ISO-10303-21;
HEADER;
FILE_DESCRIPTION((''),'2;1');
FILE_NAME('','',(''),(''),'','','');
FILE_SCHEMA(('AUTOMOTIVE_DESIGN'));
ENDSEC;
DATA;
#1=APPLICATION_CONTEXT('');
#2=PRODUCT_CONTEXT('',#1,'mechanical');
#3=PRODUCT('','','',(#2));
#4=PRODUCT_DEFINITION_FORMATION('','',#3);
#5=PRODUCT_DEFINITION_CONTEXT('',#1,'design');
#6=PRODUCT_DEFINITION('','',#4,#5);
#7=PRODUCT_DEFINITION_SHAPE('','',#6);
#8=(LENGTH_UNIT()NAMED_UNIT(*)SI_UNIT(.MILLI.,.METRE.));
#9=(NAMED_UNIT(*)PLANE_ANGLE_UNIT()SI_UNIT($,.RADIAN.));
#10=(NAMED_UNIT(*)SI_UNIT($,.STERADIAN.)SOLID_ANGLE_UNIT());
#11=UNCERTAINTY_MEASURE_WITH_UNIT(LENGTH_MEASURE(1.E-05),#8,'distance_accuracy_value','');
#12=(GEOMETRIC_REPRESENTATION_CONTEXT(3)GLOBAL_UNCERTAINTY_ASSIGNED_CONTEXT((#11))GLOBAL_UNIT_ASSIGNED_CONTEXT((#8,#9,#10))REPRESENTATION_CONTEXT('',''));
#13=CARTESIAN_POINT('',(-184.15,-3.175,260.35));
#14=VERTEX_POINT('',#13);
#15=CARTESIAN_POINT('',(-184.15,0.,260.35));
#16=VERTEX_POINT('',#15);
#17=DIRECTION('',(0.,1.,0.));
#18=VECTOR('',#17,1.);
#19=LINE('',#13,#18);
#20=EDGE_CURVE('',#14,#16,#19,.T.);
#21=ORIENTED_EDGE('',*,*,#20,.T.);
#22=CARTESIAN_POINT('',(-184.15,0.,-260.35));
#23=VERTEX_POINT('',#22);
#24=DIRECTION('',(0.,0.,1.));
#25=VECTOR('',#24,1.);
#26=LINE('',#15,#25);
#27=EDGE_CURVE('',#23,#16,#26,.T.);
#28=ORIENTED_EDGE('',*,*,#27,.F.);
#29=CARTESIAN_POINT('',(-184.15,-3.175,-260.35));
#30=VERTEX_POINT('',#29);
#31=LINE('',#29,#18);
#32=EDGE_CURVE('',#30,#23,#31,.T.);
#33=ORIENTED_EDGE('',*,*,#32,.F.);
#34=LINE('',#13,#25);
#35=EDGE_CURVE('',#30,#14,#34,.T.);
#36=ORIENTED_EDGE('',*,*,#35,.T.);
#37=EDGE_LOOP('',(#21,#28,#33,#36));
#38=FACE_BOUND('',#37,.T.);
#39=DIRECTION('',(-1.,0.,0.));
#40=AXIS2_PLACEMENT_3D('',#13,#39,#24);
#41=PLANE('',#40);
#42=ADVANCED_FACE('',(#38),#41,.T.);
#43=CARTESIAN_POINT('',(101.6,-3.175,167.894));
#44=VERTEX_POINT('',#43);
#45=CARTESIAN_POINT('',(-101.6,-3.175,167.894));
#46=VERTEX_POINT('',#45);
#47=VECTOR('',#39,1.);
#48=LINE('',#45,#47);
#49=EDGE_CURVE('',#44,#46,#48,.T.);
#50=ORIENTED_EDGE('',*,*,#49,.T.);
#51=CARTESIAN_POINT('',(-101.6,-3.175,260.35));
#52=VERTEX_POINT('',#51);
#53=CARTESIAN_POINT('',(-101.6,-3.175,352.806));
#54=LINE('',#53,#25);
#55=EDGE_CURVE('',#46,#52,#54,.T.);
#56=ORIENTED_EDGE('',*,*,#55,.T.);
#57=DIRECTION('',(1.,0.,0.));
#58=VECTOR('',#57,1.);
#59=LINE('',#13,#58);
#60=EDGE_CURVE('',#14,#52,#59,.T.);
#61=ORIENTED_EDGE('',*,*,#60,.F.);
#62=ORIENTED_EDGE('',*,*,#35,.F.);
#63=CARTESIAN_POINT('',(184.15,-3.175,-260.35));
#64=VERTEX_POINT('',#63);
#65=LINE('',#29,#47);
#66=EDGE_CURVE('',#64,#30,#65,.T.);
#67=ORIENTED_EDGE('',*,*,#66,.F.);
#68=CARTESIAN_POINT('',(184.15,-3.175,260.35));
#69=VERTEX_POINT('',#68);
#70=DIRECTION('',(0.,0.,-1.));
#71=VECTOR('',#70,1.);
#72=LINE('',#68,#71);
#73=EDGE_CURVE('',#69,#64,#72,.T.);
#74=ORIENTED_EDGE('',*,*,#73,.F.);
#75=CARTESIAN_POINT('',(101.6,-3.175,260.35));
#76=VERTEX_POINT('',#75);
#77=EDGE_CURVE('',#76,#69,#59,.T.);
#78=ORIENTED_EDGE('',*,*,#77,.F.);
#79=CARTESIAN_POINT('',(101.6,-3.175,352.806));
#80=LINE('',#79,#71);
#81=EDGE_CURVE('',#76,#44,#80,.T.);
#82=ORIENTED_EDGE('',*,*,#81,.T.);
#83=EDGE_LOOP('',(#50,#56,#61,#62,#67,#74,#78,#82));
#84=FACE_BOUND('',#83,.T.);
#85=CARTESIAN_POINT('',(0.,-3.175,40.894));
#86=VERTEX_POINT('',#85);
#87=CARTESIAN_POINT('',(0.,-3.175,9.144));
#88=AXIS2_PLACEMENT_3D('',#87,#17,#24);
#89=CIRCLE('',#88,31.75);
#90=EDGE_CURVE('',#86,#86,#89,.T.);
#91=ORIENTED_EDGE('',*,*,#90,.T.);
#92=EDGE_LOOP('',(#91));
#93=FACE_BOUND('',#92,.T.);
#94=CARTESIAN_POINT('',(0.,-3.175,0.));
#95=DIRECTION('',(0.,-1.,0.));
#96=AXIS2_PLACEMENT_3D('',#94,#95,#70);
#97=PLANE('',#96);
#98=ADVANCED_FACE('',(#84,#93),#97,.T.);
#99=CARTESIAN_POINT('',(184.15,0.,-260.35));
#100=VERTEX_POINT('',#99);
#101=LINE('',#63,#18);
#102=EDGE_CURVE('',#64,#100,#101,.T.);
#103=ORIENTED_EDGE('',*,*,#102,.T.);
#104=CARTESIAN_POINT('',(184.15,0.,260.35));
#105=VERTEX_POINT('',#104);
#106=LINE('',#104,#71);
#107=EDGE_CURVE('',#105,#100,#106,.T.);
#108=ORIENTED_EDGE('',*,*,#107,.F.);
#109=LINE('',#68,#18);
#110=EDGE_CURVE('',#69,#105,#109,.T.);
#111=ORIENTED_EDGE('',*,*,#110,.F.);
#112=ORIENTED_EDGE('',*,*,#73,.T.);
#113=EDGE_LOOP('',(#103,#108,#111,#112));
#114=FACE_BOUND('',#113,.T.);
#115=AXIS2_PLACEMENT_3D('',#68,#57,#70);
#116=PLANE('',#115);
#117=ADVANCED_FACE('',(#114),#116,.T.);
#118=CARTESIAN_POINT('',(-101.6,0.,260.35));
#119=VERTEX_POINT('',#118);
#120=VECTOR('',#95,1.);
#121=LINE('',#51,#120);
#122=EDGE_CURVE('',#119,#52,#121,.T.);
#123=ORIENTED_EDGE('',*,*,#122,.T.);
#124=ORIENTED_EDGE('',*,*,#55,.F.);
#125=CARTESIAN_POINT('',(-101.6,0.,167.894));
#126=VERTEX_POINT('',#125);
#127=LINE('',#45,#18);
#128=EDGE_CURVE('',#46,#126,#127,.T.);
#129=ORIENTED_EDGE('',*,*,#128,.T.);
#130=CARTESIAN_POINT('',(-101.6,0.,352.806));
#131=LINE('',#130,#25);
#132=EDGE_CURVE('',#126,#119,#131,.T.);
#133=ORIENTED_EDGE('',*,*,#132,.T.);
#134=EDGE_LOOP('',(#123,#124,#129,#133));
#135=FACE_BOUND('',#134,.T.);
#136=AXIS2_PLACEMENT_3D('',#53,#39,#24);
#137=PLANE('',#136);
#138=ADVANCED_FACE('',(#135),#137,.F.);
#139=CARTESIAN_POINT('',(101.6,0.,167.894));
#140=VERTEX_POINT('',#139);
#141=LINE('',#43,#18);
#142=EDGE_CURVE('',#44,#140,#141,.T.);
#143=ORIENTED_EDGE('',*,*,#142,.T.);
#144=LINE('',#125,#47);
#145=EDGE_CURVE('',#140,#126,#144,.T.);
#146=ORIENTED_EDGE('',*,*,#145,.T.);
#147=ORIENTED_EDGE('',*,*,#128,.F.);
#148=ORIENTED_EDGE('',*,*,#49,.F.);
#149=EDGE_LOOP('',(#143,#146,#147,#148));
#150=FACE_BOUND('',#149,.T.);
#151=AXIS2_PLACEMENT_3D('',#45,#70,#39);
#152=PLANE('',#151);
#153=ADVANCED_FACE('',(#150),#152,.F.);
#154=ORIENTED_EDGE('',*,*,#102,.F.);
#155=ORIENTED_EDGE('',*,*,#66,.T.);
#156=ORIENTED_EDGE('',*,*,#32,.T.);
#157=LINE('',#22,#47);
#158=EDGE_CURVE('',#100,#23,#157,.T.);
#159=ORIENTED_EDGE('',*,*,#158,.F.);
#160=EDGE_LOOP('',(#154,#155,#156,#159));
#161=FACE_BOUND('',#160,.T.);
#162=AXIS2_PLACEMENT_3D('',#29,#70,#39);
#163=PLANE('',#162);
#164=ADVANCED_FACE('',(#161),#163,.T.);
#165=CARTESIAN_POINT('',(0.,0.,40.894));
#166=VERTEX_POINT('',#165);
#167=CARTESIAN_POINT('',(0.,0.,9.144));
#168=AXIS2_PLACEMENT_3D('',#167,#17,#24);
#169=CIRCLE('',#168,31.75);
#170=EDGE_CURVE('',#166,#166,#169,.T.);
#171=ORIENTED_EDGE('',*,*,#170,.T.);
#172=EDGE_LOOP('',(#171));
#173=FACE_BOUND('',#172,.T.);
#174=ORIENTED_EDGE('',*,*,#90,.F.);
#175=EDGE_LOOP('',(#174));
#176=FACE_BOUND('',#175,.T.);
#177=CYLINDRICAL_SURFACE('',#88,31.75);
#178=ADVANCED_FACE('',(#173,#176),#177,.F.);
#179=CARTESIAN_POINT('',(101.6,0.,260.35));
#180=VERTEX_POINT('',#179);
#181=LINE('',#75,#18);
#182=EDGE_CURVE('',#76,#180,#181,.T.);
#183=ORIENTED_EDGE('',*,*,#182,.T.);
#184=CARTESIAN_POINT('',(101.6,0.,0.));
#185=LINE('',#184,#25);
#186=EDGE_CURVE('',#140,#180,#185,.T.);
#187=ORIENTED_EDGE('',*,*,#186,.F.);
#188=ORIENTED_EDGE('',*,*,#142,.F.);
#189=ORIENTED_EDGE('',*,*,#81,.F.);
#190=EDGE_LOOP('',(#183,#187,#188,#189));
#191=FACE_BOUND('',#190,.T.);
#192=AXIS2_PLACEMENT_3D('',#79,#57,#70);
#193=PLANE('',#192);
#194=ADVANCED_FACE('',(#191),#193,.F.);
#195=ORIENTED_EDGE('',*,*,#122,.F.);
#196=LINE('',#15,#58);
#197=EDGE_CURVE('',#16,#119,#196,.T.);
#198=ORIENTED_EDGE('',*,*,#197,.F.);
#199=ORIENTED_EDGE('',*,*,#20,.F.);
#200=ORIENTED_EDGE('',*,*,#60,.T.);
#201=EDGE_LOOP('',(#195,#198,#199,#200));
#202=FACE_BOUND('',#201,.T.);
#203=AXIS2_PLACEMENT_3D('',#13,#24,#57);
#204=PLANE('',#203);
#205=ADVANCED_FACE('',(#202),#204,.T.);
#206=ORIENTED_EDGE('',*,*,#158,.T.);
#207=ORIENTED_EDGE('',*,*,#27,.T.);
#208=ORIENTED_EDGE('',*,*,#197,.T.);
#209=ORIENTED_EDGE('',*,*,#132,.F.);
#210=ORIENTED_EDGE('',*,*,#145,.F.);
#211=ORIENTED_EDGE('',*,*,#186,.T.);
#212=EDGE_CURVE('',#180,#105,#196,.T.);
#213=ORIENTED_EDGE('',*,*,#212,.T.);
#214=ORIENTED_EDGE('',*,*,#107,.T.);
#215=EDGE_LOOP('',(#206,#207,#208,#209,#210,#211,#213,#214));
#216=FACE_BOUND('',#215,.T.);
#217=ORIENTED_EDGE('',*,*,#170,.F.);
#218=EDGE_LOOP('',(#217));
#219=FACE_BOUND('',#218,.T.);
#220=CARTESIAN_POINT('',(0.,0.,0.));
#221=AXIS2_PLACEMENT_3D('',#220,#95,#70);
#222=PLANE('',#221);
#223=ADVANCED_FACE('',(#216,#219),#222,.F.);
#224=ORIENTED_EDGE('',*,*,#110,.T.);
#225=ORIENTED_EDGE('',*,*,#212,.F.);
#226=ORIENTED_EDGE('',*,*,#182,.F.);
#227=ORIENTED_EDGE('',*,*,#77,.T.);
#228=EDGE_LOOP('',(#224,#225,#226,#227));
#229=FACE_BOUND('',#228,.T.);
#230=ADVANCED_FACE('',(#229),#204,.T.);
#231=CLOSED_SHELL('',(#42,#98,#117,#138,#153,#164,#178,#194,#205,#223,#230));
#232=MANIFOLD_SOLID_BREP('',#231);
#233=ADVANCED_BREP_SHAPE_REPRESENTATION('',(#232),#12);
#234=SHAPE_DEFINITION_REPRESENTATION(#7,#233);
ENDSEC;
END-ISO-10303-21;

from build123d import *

# Parameters (mm, degrees)
SKETCH1_W          = 368.3
SKETCH1_H          = 520.7
BASE_FLANGE1_DEPTH = 3.175
SKETCH6_W          = 203.2
SKETCH6_H          = 184.912
CUT_EXTRUDE1_DEPTH = 319.909745265
SKETCH7_R          = 31.75
CUT_EXTRUDE2_DEPTH = 319.909745265


# Sheet-metal steps are written as plain solids
with BuildPart() as part:
    # Sketch1 → Base-Flange1 (new body)
    with BuildSketch(Plane(origin=(0, 0, 0), x_dir=(1, 0, 0), z_dir=(0, 1, 0))):
        Rectangle(SKETCH1_W, SKETCH1_H)
    extrude(amount=-BASE_FLANGE1_DEPTH)

    # Sketch6 → Cut-Extrude1 (cut, through all)
    with BuildSketch(Plane(origin=(0, 0, 0), x_dir=(1, 0, 0), z_dir=(0, 1, 0))):
        with Locations((0, -260.35)):
            Rectangle(SKETCH6_W, SKETCH6_H)
    extrude(amount=-CUT_EXTRUDE1_DEPTH, mode=Mode.SUBTRACT)

    # Sketch7 → Cut-Extrude2 (cut, through all)
    with BuildSketch(Plane(origin=(0, 0, 0), x_dir=(1, 0, 0), z_dir=(0, 1, 0))):
        with Locations(Location((0, -9.144, 0), (0, 0, 270))):
            Circle(SKETCH7_R)
    extrude(amount=-CUT_EXTRUDE2_DEPTH, mode=Mode.SUBTRACT)


solid = part.part
